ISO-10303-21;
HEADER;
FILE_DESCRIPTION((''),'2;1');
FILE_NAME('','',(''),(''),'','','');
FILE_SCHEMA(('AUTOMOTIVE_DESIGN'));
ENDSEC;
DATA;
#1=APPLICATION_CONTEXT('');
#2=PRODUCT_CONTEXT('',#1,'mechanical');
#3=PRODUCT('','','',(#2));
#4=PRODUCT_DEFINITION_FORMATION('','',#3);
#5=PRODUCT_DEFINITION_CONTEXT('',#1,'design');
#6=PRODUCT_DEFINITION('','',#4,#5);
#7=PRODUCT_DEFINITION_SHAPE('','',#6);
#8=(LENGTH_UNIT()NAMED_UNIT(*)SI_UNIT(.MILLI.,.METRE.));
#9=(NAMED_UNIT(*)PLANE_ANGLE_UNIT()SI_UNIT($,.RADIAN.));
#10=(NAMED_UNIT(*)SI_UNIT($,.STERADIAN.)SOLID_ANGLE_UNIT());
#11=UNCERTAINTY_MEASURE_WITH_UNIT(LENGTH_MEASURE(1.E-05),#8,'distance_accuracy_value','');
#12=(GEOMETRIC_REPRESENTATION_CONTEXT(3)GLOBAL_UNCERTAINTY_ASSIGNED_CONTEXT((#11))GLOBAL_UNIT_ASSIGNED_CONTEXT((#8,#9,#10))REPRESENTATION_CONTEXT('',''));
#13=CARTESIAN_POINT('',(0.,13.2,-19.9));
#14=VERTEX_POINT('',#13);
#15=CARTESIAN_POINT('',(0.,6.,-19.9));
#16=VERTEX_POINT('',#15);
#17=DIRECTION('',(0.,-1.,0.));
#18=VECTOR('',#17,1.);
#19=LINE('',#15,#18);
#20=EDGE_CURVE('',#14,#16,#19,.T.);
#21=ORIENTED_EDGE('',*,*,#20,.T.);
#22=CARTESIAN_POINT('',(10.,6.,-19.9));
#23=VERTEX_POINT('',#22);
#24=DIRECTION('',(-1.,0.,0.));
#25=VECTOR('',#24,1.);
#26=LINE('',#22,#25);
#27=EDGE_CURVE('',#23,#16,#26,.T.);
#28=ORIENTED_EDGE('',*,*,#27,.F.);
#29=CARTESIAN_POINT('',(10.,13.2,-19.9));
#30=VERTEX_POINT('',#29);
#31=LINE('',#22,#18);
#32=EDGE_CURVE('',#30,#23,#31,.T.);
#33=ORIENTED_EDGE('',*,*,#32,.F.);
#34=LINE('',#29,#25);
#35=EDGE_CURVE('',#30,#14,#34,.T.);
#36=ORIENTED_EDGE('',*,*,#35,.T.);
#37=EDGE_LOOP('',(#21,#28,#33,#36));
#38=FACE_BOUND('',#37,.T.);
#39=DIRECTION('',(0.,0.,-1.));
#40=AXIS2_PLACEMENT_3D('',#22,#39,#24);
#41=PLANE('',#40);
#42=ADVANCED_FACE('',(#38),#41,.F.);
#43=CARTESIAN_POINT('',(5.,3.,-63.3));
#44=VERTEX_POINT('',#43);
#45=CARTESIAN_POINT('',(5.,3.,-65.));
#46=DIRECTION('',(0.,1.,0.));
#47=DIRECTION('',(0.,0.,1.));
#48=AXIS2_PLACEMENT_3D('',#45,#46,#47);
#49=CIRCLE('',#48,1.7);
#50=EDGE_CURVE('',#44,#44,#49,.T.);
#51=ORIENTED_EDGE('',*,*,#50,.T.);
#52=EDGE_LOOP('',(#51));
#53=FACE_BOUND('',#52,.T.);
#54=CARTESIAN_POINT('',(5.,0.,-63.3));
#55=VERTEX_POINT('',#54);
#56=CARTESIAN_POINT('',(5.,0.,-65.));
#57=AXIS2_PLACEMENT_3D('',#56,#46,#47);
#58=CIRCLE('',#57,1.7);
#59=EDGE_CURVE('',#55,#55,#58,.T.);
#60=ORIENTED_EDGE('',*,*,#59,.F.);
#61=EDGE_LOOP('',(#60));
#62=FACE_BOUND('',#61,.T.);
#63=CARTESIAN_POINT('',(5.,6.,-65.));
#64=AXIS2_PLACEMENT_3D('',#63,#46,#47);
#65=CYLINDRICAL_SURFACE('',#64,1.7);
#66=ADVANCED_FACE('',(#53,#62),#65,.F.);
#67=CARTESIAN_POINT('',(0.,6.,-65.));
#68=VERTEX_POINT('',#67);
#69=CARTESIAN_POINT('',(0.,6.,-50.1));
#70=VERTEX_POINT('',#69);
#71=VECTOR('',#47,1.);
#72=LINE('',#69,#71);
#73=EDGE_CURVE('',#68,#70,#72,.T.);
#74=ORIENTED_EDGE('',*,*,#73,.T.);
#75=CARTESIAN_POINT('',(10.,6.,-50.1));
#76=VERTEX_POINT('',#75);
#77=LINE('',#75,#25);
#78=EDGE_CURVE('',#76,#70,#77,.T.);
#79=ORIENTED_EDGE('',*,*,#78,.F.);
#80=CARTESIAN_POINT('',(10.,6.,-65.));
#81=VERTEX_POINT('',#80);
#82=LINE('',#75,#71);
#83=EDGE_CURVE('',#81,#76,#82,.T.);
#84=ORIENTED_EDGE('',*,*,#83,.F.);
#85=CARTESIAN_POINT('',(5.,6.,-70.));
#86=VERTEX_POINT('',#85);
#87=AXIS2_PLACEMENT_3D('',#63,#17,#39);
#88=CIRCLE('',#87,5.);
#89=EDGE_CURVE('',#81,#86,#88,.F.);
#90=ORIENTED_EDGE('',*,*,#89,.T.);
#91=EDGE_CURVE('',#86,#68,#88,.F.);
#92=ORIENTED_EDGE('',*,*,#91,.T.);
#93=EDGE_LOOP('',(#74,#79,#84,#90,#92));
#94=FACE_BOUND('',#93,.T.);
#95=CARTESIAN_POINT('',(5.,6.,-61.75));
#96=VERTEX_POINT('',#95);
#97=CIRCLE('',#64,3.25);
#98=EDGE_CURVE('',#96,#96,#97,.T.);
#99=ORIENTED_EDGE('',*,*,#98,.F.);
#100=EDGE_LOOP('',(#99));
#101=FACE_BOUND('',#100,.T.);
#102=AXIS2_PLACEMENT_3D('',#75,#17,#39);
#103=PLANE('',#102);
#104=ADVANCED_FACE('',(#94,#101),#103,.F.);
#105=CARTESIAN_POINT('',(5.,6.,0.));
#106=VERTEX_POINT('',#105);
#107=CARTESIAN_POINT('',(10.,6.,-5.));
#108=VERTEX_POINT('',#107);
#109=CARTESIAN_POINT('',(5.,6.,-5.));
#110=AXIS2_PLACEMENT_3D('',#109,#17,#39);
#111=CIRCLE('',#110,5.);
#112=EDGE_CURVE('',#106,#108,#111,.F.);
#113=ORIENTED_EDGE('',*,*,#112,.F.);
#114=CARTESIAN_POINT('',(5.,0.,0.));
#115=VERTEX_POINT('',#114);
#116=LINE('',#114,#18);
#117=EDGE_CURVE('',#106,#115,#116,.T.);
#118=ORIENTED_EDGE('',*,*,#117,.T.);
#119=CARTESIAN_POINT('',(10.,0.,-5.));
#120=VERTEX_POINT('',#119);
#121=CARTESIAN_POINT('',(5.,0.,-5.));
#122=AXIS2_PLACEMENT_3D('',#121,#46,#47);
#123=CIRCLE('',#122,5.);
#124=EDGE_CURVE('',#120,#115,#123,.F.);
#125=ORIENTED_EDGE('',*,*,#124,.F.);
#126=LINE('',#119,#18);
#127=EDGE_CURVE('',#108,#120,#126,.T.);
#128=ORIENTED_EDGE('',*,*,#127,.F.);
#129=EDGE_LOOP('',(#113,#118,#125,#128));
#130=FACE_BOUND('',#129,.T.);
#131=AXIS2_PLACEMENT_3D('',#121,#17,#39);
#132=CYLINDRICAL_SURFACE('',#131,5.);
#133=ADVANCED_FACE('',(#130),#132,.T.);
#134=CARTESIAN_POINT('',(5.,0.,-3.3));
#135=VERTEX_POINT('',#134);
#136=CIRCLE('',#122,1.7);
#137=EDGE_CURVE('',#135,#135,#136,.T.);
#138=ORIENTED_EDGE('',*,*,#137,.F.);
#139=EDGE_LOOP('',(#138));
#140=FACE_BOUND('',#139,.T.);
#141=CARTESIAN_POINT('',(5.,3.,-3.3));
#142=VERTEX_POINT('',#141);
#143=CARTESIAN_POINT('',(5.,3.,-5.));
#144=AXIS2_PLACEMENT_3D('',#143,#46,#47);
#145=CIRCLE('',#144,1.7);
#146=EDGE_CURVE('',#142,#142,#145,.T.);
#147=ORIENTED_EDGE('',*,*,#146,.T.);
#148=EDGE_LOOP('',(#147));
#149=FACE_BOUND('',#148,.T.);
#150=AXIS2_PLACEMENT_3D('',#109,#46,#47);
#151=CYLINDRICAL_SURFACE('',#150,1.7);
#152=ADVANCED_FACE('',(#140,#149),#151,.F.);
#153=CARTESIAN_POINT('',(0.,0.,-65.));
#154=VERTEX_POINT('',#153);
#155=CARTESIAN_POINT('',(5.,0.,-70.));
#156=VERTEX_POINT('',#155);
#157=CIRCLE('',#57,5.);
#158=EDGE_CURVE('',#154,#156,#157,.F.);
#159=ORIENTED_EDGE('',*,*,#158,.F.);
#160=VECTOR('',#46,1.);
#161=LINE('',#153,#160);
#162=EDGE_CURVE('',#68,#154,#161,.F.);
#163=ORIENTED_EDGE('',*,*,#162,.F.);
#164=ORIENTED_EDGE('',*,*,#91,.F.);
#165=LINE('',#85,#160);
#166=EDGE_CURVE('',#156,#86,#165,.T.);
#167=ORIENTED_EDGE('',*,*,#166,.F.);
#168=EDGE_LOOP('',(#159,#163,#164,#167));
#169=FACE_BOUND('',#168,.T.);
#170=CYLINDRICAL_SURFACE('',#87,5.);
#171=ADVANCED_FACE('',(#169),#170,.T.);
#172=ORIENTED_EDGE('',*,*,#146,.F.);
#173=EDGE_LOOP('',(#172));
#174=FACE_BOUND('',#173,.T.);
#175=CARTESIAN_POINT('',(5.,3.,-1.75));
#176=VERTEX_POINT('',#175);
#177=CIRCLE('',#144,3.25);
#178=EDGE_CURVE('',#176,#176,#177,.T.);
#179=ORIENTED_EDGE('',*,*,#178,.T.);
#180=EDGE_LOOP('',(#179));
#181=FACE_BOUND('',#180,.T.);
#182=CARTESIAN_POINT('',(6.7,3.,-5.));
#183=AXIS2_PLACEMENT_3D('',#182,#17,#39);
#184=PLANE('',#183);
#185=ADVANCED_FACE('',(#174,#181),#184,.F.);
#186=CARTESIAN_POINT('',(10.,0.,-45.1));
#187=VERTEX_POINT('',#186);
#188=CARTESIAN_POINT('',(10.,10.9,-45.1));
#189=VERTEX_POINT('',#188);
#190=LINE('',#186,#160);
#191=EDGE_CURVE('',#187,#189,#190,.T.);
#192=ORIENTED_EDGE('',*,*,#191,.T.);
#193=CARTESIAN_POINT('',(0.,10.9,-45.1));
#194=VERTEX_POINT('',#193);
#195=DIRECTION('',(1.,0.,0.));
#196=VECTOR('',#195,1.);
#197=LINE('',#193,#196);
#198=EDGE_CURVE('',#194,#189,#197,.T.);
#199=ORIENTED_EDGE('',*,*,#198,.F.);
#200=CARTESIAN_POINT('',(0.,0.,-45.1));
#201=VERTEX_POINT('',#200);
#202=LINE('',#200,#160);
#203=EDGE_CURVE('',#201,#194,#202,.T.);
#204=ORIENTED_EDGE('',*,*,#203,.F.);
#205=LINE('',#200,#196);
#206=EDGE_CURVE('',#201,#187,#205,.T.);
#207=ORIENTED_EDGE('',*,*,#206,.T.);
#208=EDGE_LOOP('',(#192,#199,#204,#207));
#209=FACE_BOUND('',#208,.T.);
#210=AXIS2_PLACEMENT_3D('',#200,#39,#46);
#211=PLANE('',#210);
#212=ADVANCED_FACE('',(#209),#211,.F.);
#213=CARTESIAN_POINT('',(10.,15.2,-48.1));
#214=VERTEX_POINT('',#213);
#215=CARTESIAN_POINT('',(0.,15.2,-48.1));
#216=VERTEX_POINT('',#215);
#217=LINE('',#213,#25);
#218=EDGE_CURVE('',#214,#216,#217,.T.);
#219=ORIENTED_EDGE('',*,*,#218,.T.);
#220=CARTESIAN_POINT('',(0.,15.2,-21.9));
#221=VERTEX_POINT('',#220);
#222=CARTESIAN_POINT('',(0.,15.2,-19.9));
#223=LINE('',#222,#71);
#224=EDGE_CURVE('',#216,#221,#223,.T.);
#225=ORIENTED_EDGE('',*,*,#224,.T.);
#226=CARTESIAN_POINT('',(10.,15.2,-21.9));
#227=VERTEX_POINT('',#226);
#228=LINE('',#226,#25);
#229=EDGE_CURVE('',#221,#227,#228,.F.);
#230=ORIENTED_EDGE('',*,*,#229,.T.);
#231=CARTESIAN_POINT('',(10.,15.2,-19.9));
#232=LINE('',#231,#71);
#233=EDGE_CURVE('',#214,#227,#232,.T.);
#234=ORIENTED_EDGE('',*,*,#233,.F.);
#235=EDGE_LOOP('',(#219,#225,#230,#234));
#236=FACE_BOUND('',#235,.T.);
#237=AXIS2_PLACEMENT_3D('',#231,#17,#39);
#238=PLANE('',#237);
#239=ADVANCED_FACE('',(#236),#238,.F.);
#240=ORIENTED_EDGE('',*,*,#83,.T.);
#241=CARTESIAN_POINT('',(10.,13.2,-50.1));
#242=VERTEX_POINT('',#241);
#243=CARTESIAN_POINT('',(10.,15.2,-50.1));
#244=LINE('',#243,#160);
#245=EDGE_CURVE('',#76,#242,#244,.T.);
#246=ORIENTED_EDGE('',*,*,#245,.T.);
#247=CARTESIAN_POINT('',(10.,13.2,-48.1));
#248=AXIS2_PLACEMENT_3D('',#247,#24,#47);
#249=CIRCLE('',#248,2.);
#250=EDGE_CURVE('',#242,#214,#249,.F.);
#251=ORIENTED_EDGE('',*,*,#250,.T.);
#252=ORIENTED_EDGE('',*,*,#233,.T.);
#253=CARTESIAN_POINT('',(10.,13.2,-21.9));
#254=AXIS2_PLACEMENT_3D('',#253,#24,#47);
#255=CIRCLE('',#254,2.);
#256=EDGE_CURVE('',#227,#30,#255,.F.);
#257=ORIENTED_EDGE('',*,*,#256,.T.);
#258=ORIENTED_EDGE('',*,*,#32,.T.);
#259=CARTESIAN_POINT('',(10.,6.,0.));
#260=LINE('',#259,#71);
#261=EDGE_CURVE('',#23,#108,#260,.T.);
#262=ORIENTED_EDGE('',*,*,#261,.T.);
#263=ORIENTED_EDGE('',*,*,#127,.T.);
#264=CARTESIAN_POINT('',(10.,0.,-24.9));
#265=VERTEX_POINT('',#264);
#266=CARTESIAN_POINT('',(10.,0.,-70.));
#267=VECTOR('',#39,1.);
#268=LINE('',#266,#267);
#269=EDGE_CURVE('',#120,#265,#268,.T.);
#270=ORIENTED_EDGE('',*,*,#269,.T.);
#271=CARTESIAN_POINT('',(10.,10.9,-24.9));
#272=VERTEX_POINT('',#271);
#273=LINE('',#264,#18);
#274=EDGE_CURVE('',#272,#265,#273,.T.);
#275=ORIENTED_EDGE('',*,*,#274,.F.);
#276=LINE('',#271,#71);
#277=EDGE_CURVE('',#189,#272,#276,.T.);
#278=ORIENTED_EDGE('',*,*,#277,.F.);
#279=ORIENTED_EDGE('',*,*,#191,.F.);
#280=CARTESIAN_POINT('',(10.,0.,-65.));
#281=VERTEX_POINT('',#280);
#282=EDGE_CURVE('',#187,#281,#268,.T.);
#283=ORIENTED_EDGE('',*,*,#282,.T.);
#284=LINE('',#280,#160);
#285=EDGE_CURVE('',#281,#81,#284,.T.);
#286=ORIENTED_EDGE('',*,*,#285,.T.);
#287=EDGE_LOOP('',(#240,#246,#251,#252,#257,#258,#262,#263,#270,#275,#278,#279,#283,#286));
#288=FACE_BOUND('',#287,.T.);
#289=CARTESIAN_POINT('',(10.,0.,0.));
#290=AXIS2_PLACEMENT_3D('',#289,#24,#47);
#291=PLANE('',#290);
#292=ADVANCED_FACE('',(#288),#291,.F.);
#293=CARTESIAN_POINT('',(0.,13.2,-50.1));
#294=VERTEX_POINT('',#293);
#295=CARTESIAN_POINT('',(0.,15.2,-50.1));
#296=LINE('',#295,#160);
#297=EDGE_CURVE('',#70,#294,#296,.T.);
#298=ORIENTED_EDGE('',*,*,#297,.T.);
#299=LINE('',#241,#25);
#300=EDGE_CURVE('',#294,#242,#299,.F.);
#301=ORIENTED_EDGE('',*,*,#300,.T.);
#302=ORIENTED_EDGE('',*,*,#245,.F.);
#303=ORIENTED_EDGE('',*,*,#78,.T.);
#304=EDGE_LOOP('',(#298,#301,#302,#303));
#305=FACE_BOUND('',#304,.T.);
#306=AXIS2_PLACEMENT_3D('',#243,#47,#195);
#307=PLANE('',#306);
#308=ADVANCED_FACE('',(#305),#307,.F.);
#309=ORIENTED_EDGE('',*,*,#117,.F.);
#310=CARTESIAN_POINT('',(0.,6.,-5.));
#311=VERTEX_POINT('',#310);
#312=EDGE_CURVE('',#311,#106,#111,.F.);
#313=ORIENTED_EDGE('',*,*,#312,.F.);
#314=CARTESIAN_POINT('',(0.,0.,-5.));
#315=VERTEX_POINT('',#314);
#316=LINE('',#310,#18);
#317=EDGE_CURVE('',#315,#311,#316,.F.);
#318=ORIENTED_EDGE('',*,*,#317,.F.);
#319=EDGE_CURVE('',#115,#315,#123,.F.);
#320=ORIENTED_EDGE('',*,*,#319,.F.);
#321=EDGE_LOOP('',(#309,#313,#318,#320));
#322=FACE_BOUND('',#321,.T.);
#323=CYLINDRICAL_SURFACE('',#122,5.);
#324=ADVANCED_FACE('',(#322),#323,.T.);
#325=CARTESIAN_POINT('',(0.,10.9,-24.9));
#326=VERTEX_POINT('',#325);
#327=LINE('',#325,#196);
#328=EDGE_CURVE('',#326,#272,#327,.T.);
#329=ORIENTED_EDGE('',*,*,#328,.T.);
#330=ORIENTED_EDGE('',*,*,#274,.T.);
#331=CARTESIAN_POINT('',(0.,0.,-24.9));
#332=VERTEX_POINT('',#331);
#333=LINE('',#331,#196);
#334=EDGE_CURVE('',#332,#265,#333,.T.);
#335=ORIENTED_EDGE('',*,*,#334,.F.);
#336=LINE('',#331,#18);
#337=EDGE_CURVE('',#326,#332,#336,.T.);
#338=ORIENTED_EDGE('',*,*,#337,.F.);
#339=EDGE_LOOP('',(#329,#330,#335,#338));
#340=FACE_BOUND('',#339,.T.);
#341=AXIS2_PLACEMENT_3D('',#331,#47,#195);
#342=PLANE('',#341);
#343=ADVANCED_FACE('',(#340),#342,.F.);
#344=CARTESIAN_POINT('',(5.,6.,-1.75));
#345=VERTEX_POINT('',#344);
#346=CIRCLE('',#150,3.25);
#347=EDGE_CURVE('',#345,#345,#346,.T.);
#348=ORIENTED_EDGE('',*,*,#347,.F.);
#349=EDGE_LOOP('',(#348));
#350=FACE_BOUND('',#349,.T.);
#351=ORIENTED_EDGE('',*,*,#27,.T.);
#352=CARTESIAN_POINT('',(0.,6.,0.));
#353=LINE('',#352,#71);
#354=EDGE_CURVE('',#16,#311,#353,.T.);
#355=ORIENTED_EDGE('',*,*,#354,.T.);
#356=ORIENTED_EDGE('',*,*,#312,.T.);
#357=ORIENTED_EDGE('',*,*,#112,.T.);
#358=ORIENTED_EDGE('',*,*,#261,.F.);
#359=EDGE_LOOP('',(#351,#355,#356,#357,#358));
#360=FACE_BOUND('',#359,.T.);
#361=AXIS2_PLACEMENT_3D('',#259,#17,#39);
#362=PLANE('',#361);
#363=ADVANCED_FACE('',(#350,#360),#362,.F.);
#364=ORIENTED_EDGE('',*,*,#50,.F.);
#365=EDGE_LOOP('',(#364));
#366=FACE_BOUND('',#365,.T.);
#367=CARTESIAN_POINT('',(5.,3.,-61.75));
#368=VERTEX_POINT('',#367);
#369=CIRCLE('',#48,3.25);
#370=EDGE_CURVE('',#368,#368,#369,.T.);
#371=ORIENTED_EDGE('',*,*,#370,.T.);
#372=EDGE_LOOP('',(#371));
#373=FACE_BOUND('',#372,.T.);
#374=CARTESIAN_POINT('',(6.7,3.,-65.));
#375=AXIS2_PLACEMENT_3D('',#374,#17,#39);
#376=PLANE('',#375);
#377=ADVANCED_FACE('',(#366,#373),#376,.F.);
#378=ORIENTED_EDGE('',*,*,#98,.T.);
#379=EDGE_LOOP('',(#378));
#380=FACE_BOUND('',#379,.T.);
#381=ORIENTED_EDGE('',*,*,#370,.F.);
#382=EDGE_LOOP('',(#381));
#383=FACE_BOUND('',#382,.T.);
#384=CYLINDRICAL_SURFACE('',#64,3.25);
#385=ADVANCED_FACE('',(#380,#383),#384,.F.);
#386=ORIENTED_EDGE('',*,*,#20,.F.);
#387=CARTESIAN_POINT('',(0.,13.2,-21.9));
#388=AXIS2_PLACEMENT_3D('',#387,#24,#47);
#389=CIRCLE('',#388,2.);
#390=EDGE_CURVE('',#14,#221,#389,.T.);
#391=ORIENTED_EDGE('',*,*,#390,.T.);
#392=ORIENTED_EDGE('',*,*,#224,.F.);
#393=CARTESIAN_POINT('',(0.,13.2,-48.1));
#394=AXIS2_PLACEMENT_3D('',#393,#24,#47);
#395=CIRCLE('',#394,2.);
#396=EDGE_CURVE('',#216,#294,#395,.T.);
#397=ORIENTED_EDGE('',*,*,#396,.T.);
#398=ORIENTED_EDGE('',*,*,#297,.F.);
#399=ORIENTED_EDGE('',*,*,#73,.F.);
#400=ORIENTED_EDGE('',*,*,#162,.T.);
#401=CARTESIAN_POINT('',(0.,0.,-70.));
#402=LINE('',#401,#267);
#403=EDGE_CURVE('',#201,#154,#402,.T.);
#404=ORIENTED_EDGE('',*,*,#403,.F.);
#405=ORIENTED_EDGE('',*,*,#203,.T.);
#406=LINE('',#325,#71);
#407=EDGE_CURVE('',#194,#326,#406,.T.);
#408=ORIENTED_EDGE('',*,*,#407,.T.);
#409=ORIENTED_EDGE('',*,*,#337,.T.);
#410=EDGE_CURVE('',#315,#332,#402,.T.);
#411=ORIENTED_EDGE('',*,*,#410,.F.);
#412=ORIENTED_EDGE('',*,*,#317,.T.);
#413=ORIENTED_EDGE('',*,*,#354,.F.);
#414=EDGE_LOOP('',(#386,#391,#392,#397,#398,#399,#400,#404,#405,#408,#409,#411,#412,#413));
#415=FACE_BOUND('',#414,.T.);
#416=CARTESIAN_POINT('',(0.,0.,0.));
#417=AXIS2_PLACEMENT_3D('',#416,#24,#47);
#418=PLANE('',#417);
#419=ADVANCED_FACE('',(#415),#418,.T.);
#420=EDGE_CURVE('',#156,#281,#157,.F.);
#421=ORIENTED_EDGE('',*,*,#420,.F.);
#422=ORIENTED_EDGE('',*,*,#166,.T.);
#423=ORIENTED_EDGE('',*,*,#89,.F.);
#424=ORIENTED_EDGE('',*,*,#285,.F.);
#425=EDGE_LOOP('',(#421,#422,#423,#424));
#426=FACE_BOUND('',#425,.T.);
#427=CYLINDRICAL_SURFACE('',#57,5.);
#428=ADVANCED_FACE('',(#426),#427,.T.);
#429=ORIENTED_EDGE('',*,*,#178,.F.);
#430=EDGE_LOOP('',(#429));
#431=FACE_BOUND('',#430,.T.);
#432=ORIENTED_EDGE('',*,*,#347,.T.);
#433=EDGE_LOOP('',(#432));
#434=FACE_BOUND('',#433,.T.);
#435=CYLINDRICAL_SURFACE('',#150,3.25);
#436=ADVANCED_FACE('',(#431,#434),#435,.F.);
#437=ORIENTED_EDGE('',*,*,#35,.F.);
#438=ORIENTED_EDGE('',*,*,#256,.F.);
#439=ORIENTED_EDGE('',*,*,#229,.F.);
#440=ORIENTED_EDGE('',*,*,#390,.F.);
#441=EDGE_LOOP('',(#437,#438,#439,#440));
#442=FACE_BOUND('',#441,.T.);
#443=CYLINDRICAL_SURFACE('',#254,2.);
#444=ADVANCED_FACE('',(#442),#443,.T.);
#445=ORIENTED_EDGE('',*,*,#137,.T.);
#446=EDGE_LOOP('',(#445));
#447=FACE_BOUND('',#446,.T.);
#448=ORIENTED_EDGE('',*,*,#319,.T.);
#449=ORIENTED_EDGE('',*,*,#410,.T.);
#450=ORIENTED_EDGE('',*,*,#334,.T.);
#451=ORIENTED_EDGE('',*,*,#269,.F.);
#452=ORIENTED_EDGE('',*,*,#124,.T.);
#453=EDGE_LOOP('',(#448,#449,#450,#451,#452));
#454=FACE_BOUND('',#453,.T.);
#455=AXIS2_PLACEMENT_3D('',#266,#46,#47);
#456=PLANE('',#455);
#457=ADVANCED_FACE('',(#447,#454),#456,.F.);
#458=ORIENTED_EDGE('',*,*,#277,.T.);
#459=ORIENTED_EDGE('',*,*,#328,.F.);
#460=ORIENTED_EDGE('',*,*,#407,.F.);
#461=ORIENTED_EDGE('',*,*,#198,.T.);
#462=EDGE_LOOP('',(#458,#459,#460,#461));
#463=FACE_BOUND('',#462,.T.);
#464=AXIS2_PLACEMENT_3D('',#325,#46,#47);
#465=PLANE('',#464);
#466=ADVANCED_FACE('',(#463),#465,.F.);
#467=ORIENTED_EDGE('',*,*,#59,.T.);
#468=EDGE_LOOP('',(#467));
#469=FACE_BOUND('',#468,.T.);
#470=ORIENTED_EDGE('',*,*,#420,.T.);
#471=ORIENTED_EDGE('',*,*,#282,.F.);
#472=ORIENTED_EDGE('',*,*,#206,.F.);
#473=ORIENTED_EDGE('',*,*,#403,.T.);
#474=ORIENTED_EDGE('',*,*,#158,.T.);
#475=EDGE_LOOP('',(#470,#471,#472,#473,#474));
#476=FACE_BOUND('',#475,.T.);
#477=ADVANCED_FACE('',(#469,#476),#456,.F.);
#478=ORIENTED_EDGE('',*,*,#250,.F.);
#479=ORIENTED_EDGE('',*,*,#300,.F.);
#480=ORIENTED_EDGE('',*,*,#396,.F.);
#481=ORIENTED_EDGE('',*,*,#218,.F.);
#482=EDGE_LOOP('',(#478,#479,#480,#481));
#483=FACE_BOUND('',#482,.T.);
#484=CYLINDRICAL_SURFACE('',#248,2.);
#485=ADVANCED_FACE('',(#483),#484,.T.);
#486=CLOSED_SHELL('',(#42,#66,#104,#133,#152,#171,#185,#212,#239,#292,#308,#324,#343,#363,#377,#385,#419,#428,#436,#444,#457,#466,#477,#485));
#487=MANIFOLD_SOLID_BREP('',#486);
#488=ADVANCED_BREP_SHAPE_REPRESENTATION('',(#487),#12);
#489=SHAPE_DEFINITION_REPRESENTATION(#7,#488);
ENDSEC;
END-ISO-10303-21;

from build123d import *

# Parameters (mm, degrees)
RESSALTO_EXTRUS_O1_DEPTH          = 10
REBAIXO_PARA_SHCS_M31_D           = 3.4
REBAIXO_PARA_SHCS_M31_CBORE_D     = 6.5
REBAIXO_PARA_SHCS_M31_CBORE_DEPTH = 3
ESBO_O5_W                         = 20.2
ESBO_O5_H                         = 10.9
CORTE_EXTRUS_O1_DEPTH             = 73.325928961
FILETE1_R                         = 5
FILETE2_R                         = 2


with BuildPart() as part:
    # Esboço1 → Ressalto-extrusão1 (new body)
    with BuildSketch(Plane(origin=(0, 0, 0), x_dir=(0, 0, -1), z_dir=(1, 0, 0))):
        Polygon((0, 0), (0, 6), (19.9, 6), (19.9, 15.2), (50.1, 15.2), (50.1, 6), (70, 6), (70, 0), align=None)
    extrude(amount=RESSALTO_EXTRUS_O1_DEPTH)

    # Rebaixo para SHCS M31 (through all)
    with Locations(Plane(origin=(0, 6, 0), x_dir=(1, 0, 0), z_dir=(0, 1, 0))):
        with Locations((5, 5), (5, 65)):
            CounterBoreHole(REBAIXO_PARA_SHCS_M31_D / 2, REBAIXO_PARA_SHCS_M31_CBORE_D / 2, REBAIXO_PARA_SHCS_M31_CBORE_DEPTH)

    # Esboço5 → Corte-extrusão1 (cut, through all)
    with BuildSketch(Plane(origin=(10, 0, 0), x_dir=(0, 0, -1), z_dir=(1, 0, 0))):
        with Locations((35, 5.45)):
            Rectangle(ESBO_O5_W, ESBO_O5_H)
    extrude(amount=-CORTE_EXTRUS_O1_DEPTH, mode=Mode.SUBTRACT)

    # Filete1
    filete1_edges = [part.edges().sort_by_distance(p)[0] for p in [
        (10, 3, 0),
        (0, 3, 0),
        (10, 3, -70),
        (0, 3, -70),
    ]]
    fillet(filete1_edges, radius=FILETE1_R - 0.0001)  # a hair under: the kernel refuses the full size

    # Filete2
    filete2_edges = [part.edges().sort_by_distance(p)[0] for p in [
        (5, 15.2, -19.9),
        (5, 15.2, -50.1),
    ]]
    fillet(filete2_edges, radius=FILETE2_R)


solid = part.part
